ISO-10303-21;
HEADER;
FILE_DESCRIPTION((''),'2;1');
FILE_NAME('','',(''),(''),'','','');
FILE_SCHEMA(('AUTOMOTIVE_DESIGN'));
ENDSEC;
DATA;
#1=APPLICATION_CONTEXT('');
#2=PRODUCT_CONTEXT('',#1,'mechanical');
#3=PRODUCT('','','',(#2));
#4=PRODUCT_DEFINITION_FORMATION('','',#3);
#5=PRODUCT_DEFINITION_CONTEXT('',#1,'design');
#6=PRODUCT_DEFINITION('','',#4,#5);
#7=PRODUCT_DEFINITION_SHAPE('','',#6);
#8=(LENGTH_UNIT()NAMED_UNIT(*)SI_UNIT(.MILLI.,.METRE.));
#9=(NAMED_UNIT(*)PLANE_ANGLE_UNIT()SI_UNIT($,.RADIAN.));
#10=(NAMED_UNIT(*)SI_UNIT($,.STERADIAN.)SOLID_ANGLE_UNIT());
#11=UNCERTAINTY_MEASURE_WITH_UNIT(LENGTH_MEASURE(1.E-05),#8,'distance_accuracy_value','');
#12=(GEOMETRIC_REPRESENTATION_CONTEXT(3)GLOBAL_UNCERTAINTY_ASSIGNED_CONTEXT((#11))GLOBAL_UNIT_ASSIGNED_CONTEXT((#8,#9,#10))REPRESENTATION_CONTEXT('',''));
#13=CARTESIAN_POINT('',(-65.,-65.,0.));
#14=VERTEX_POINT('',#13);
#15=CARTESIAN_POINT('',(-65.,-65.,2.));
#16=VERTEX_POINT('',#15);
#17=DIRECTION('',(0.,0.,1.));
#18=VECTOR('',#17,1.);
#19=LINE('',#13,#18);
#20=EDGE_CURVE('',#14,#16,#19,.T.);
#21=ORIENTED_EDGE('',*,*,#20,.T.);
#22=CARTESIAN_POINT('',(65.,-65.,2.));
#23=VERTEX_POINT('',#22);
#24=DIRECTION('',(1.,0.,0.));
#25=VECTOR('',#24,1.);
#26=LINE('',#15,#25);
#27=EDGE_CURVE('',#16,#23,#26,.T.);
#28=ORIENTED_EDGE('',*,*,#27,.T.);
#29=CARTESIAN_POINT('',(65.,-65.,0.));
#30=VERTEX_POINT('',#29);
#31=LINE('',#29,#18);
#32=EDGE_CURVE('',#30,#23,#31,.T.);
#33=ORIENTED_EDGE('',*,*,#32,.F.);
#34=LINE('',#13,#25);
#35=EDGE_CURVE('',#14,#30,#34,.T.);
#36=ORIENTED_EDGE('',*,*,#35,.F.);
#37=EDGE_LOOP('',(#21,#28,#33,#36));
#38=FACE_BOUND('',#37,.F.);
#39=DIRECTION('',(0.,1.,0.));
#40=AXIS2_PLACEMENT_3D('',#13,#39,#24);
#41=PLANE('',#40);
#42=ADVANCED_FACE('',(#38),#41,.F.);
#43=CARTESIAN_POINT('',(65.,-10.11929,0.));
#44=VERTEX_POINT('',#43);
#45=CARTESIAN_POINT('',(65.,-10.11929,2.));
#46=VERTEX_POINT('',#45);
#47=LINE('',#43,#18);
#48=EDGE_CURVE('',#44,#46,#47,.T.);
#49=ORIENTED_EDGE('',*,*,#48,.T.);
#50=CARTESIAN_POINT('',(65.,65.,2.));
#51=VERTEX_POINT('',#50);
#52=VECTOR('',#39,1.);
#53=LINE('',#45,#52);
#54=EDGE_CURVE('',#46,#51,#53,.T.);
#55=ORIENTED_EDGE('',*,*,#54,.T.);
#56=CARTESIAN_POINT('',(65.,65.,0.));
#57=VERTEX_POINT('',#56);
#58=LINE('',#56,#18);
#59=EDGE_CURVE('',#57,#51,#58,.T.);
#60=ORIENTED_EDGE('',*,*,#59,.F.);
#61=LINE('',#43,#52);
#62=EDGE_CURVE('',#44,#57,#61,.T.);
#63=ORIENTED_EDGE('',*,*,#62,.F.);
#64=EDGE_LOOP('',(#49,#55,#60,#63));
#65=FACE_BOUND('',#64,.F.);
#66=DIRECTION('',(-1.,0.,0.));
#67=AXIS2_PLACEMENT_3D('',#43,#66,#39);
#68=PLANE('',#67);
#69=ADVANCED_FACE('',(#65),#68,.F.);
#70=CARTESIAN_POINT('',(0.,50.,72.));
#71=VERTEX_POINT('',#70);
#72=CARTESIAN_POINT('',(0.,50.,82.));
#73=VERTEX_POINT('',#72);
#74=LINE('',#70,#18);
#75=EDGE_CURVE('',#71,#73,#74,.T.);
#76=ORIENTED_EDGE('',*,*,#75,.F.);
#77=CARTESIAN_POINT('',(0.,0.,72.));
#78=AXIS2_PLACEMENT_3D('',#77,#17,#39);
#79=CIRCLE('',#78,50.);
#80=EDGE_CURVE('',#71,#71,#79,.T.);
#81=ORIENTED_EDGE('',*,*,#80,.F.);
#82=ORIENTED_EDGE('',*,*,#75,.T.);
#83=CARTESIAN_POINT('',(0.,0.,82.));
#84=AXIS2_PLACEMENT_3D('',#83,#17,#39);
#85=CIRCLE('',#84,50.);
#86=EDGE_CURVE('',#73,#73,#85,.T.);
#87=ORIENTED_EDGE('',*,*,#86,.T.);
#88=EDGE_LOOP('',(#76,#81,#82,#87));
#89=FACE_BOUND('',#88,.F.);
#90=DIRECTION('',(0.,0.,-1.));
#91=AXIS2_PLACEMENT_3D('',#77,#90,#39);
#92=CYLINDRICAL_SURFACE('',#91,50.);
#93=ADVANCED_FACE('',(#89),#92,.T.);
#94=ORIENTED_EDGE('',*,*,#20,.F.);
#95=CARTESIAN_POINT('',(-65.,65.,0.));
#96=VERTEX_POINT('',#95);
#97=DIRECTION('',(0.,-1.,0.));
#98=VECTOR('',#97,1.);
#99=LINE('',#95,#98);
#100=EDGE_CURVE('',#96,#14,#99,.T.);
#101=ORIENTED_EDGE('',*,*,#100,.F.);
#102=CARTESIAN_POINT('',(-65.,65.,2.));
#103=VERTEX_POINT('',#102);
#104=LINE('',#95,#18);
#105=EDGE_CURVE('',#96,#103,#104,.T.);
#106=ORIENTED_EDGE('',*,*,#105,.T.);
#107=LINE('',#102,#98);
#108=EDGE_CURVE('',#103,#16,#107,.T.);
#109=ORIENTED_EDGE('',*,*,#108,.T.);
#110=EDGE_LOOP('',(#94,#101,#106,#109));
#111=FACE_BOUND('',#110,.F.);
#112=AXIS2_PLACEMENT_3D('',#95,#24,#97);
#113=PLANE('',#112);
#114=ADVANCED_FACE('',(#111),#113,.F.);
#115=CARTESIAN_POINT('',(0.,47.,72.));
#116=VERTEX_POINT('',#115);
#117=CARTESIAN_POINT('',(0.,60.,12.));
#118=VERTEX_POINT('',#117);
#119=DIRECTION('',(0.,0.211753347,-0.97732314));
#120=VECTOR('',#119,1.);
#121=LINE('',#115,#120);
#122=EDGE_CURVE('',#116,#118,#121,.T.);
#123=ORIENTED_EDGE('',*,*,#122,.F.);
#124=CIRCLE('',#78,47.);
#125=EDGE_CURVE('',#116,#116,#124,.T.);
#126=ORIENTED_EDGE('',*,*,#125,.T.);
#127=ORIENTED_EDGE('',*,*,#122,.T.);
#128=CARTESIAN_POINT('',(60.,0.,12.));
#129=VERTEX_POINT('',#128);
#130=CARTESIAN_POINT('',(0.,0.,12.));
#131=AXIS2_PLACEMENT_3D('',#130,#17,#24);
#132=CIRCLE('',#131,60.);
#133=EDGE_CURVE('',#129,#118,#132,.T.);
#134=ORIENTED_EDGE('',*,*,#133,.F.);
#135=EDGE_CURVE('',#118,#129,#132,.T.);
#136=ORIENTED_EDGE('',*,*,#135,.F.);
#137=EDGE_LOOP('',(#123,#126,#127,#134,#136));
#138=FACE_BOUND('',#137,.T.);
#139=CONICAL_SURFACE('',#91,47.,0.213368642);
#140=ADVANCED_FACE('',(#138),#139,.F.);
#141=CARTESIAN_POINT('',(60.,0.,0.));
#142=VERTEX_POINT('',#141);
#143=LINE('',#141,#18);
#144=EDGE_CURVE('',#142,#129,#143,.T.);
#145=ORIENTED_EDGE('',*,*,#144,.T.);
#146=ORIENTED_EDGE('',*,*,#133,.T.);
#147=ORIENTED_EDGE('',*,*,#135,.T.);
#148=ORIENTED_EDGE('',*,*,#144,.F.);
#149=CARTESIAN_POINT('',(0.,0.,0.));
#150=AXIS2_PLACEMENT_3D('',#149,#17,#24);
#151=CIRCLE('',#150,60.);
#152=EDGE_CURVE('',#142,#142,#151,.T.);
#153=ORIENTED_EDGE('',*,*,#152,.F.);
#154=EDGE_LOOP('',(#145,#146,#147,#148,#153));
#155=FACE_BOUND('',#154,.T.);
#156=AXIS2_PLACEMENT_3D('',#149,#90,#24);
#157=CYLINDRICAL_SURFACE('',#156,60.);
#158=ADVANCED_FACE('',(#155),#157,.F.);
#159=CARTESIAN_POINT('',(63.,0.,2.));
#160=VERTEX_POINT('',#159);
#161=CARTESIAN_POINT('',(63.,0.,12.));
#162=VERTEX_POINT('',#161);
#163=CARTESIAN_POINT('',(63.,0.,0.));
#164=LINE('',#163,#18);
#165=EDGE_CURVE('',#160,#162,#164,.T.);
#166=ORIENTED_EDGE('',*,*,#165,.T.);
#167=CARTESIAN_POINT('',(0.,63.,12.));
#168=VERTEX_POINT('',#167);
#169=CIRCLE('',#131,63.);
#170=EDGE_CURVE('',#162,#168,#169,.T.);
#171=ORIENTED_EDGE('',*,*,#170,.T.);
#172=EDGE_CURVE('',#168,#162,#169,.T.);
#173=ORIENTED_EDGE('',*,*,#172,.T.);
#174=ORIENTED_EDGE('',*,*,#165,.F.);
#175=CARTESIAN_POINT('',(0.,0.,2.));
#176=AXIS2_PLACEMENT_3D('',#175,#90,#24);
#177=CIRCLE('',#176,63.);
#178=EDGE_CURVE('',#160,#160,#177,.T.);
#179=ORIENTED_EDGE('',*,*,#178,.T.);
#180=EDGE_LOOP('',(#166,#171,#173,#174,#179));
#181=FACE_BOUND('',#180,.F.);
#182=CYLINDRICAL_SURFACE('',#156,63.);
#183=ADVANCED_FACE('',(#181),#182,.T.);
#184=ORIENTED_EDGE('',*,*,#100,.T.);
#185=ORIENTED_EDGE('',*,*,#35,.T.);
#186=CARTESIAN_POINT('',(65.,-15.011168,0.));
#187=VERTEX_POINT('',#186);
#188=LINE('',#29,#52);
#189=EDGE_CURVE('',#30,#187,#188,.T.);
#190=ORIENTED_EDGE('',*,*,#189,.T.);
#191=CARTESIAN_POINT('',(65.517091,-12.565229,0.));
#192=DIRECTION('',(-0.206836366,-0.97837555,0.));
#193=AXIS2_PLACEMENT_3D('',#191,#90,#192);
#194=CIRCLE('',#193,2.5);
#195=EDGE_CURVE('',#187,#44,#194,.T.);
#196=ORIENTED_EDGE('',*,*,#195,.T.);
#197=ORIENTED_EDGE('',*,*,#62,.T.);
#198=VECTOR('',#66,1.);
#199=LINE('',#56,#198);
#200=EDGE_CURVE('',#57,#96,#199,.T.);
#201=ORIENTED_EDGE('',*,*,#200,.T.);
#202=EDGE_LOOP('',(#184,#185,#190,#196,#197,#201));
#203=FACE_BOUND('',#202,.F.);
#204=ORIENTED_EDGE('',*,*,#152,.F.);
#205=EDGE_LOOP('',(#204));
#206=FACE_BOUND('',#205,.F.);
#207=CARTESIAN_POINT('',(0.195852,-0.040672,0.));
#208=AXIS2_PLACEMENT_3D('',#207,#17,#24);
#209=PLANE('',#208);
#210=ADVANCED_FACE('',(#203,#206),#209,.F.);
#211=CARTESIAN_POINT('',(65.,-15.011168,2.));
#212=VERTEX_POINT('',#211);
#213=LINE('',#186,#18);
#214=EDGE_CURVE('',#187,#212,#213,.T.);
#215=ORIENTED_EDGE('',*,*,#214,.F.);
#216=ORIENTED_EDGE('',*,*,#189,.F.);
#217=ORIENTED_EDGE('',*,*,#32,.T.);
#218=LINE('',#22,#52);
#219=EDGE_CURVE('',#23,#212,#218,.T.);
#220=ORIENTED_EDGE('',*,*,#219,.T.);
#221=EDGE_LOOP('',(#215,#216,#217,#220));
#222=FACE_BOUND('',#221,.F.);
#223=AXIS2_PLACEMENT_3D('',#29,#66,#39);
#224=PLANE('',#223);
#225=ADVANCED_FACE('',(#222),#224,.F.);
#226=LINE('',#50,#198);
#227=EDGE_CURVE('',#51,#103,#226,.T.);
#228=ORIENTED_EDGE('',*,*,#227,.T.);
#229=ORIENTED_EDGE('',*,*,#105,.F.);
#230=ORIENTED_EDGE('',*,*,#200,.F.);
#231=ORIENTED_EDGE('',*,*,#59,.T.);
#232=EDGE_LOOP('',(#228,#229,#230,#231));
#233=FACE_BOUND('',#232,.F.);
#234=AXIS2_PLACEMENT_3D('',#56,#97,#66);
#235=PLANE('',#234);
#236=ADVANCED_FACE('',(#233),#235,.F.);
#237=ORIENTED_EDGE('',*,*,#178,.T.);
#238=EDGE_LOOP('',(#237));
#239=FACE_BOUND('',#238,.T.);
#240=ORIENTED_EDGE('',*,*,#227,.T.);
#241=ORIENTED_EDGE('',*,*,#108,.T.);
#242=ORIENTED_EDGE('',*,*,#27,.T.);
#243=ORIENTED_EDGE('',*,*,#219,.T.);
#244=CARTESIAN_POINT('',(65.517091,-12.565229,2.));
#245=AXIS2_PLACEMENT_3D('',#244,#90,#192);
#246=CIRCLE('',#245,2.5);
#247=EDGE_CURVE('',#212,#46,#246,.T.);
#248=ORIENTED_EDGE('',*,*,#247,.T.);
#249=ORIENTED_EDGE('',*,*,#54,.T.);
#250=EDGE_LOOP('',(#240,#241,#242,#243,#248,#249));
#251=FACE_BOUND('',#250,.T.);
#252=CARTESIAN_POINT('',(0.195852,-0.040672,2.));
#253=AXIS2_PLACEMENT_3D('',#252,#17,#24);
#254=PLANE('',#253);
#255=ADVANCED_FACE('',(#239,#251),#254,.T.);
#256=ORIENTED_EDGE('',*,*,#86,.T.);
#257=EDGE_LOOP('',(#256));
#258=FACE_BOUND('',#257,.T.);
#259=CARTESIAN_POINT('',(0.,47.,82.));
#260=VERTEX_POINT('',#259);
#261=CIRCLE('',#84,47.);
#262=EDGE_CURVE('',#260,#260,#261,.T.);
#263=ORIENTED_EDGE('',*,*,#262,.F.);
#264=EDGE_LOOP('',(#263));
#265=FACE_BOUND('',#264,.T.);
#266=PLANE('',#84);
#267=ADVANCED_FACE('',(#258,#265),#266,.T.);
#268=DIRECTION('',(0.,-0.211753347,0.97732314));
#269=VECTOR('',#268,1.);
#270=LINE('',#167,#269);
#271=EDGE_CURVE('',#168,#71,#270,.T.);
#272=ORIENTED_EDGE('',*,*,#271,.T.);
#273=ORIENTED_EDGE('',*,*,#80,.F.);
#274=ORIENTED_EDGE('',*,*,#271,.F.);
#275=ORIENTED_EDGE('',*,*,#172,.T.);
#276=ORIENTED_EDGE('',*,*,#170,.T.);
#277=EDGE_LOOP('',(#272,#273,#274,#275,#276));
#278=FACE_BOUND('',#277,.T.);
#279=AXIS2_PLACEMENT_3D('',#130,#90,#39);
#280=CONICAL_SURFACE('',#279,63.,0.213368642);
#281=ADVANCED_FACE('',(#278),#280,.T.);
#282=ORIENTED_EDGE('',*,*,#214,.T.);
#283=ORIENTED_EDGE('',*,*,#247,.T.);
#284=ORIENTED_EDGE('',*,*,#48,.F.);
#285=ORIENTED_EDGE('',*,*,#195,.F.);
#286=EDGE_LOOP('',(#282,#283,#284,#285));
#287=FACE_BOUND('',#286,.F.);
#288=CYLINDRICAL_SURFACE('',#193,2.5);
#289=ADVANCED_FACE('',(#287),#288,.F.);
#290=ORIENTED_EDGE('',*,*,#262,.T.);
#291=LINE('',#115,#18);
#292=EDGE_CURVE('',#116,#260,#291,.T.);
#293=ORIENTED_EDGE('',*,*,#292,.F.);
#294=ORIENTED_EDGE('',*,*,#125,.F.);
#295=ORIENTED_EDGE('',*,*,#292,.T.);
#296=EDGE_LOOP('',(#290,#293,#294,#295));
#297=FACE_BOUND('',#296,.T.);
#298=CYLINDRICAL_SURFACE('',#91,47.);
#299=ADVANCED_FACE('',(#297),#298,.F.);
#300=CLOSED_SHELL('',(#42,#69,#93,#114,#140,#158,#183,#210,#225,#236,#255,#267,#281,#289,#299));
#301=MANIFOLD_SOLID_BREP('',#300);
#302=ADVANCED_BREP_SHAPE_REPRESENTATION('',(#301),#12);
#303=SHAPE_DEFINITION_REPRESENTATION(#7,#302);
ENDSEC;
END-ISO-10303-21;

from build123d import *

# Parameters (mm, degrees)
F0_R     = 63
F0_R_2   = 60
F1_DEPTH = 2
F2_DEPTH = 12
F5_DEPTH = 10


with BuildPart() as f1:
    # F0 (on Top) → F1 (new body)
    with BuildSketch(Plane.XY):
        with BuildLine():
            Line((65, 65), (-65, 65))
            Line((-65, 65), (-65, -65))
            Line((-65, -65), (65, -65))
            Line((65, -65), (65, -15.0111682118))
            ThreePointArc((65, -15.0111682118), (63.0170909154, -12.5652293358), (65, -10.1192904598))
            Line((65, -10.1192904598), (65, 65))
        make_face()
        Circle(F0_R, mode=Mode.SUBTRACT)
        Circle(F0_R)
        Circle(F0_R_2, mode=Mode.SUBTRACT)
    extrude(amount=F1_DEPTH)

    # F0 (on Top) → F2 (join)
    with BuildSketch(Plane.XY):
        Circle(F0_R)
        Circle(F0_R_2, mode=Mode.SUBTRACT)
    extrude(amount=F2_DEPTH)

    # F3 (on Right) → F4 (revolve)
    with BuildSketch(Plane.YZ):
        Polygon((47, 72), (60, 12), (63, 12), (50, 72), align=None)
    revolve(axis=Axis((0, 0, 42), (0, 0, 1)))

    # F5 (add): a face of the model
    f5_faces = [f1.faces().sort_by_distance(p)[0] for p in [
        (0, -48.5857864376, 72),
    ]]
    extrude(f5_faces, amount=F5_DEPTH)


solid = f1.part
